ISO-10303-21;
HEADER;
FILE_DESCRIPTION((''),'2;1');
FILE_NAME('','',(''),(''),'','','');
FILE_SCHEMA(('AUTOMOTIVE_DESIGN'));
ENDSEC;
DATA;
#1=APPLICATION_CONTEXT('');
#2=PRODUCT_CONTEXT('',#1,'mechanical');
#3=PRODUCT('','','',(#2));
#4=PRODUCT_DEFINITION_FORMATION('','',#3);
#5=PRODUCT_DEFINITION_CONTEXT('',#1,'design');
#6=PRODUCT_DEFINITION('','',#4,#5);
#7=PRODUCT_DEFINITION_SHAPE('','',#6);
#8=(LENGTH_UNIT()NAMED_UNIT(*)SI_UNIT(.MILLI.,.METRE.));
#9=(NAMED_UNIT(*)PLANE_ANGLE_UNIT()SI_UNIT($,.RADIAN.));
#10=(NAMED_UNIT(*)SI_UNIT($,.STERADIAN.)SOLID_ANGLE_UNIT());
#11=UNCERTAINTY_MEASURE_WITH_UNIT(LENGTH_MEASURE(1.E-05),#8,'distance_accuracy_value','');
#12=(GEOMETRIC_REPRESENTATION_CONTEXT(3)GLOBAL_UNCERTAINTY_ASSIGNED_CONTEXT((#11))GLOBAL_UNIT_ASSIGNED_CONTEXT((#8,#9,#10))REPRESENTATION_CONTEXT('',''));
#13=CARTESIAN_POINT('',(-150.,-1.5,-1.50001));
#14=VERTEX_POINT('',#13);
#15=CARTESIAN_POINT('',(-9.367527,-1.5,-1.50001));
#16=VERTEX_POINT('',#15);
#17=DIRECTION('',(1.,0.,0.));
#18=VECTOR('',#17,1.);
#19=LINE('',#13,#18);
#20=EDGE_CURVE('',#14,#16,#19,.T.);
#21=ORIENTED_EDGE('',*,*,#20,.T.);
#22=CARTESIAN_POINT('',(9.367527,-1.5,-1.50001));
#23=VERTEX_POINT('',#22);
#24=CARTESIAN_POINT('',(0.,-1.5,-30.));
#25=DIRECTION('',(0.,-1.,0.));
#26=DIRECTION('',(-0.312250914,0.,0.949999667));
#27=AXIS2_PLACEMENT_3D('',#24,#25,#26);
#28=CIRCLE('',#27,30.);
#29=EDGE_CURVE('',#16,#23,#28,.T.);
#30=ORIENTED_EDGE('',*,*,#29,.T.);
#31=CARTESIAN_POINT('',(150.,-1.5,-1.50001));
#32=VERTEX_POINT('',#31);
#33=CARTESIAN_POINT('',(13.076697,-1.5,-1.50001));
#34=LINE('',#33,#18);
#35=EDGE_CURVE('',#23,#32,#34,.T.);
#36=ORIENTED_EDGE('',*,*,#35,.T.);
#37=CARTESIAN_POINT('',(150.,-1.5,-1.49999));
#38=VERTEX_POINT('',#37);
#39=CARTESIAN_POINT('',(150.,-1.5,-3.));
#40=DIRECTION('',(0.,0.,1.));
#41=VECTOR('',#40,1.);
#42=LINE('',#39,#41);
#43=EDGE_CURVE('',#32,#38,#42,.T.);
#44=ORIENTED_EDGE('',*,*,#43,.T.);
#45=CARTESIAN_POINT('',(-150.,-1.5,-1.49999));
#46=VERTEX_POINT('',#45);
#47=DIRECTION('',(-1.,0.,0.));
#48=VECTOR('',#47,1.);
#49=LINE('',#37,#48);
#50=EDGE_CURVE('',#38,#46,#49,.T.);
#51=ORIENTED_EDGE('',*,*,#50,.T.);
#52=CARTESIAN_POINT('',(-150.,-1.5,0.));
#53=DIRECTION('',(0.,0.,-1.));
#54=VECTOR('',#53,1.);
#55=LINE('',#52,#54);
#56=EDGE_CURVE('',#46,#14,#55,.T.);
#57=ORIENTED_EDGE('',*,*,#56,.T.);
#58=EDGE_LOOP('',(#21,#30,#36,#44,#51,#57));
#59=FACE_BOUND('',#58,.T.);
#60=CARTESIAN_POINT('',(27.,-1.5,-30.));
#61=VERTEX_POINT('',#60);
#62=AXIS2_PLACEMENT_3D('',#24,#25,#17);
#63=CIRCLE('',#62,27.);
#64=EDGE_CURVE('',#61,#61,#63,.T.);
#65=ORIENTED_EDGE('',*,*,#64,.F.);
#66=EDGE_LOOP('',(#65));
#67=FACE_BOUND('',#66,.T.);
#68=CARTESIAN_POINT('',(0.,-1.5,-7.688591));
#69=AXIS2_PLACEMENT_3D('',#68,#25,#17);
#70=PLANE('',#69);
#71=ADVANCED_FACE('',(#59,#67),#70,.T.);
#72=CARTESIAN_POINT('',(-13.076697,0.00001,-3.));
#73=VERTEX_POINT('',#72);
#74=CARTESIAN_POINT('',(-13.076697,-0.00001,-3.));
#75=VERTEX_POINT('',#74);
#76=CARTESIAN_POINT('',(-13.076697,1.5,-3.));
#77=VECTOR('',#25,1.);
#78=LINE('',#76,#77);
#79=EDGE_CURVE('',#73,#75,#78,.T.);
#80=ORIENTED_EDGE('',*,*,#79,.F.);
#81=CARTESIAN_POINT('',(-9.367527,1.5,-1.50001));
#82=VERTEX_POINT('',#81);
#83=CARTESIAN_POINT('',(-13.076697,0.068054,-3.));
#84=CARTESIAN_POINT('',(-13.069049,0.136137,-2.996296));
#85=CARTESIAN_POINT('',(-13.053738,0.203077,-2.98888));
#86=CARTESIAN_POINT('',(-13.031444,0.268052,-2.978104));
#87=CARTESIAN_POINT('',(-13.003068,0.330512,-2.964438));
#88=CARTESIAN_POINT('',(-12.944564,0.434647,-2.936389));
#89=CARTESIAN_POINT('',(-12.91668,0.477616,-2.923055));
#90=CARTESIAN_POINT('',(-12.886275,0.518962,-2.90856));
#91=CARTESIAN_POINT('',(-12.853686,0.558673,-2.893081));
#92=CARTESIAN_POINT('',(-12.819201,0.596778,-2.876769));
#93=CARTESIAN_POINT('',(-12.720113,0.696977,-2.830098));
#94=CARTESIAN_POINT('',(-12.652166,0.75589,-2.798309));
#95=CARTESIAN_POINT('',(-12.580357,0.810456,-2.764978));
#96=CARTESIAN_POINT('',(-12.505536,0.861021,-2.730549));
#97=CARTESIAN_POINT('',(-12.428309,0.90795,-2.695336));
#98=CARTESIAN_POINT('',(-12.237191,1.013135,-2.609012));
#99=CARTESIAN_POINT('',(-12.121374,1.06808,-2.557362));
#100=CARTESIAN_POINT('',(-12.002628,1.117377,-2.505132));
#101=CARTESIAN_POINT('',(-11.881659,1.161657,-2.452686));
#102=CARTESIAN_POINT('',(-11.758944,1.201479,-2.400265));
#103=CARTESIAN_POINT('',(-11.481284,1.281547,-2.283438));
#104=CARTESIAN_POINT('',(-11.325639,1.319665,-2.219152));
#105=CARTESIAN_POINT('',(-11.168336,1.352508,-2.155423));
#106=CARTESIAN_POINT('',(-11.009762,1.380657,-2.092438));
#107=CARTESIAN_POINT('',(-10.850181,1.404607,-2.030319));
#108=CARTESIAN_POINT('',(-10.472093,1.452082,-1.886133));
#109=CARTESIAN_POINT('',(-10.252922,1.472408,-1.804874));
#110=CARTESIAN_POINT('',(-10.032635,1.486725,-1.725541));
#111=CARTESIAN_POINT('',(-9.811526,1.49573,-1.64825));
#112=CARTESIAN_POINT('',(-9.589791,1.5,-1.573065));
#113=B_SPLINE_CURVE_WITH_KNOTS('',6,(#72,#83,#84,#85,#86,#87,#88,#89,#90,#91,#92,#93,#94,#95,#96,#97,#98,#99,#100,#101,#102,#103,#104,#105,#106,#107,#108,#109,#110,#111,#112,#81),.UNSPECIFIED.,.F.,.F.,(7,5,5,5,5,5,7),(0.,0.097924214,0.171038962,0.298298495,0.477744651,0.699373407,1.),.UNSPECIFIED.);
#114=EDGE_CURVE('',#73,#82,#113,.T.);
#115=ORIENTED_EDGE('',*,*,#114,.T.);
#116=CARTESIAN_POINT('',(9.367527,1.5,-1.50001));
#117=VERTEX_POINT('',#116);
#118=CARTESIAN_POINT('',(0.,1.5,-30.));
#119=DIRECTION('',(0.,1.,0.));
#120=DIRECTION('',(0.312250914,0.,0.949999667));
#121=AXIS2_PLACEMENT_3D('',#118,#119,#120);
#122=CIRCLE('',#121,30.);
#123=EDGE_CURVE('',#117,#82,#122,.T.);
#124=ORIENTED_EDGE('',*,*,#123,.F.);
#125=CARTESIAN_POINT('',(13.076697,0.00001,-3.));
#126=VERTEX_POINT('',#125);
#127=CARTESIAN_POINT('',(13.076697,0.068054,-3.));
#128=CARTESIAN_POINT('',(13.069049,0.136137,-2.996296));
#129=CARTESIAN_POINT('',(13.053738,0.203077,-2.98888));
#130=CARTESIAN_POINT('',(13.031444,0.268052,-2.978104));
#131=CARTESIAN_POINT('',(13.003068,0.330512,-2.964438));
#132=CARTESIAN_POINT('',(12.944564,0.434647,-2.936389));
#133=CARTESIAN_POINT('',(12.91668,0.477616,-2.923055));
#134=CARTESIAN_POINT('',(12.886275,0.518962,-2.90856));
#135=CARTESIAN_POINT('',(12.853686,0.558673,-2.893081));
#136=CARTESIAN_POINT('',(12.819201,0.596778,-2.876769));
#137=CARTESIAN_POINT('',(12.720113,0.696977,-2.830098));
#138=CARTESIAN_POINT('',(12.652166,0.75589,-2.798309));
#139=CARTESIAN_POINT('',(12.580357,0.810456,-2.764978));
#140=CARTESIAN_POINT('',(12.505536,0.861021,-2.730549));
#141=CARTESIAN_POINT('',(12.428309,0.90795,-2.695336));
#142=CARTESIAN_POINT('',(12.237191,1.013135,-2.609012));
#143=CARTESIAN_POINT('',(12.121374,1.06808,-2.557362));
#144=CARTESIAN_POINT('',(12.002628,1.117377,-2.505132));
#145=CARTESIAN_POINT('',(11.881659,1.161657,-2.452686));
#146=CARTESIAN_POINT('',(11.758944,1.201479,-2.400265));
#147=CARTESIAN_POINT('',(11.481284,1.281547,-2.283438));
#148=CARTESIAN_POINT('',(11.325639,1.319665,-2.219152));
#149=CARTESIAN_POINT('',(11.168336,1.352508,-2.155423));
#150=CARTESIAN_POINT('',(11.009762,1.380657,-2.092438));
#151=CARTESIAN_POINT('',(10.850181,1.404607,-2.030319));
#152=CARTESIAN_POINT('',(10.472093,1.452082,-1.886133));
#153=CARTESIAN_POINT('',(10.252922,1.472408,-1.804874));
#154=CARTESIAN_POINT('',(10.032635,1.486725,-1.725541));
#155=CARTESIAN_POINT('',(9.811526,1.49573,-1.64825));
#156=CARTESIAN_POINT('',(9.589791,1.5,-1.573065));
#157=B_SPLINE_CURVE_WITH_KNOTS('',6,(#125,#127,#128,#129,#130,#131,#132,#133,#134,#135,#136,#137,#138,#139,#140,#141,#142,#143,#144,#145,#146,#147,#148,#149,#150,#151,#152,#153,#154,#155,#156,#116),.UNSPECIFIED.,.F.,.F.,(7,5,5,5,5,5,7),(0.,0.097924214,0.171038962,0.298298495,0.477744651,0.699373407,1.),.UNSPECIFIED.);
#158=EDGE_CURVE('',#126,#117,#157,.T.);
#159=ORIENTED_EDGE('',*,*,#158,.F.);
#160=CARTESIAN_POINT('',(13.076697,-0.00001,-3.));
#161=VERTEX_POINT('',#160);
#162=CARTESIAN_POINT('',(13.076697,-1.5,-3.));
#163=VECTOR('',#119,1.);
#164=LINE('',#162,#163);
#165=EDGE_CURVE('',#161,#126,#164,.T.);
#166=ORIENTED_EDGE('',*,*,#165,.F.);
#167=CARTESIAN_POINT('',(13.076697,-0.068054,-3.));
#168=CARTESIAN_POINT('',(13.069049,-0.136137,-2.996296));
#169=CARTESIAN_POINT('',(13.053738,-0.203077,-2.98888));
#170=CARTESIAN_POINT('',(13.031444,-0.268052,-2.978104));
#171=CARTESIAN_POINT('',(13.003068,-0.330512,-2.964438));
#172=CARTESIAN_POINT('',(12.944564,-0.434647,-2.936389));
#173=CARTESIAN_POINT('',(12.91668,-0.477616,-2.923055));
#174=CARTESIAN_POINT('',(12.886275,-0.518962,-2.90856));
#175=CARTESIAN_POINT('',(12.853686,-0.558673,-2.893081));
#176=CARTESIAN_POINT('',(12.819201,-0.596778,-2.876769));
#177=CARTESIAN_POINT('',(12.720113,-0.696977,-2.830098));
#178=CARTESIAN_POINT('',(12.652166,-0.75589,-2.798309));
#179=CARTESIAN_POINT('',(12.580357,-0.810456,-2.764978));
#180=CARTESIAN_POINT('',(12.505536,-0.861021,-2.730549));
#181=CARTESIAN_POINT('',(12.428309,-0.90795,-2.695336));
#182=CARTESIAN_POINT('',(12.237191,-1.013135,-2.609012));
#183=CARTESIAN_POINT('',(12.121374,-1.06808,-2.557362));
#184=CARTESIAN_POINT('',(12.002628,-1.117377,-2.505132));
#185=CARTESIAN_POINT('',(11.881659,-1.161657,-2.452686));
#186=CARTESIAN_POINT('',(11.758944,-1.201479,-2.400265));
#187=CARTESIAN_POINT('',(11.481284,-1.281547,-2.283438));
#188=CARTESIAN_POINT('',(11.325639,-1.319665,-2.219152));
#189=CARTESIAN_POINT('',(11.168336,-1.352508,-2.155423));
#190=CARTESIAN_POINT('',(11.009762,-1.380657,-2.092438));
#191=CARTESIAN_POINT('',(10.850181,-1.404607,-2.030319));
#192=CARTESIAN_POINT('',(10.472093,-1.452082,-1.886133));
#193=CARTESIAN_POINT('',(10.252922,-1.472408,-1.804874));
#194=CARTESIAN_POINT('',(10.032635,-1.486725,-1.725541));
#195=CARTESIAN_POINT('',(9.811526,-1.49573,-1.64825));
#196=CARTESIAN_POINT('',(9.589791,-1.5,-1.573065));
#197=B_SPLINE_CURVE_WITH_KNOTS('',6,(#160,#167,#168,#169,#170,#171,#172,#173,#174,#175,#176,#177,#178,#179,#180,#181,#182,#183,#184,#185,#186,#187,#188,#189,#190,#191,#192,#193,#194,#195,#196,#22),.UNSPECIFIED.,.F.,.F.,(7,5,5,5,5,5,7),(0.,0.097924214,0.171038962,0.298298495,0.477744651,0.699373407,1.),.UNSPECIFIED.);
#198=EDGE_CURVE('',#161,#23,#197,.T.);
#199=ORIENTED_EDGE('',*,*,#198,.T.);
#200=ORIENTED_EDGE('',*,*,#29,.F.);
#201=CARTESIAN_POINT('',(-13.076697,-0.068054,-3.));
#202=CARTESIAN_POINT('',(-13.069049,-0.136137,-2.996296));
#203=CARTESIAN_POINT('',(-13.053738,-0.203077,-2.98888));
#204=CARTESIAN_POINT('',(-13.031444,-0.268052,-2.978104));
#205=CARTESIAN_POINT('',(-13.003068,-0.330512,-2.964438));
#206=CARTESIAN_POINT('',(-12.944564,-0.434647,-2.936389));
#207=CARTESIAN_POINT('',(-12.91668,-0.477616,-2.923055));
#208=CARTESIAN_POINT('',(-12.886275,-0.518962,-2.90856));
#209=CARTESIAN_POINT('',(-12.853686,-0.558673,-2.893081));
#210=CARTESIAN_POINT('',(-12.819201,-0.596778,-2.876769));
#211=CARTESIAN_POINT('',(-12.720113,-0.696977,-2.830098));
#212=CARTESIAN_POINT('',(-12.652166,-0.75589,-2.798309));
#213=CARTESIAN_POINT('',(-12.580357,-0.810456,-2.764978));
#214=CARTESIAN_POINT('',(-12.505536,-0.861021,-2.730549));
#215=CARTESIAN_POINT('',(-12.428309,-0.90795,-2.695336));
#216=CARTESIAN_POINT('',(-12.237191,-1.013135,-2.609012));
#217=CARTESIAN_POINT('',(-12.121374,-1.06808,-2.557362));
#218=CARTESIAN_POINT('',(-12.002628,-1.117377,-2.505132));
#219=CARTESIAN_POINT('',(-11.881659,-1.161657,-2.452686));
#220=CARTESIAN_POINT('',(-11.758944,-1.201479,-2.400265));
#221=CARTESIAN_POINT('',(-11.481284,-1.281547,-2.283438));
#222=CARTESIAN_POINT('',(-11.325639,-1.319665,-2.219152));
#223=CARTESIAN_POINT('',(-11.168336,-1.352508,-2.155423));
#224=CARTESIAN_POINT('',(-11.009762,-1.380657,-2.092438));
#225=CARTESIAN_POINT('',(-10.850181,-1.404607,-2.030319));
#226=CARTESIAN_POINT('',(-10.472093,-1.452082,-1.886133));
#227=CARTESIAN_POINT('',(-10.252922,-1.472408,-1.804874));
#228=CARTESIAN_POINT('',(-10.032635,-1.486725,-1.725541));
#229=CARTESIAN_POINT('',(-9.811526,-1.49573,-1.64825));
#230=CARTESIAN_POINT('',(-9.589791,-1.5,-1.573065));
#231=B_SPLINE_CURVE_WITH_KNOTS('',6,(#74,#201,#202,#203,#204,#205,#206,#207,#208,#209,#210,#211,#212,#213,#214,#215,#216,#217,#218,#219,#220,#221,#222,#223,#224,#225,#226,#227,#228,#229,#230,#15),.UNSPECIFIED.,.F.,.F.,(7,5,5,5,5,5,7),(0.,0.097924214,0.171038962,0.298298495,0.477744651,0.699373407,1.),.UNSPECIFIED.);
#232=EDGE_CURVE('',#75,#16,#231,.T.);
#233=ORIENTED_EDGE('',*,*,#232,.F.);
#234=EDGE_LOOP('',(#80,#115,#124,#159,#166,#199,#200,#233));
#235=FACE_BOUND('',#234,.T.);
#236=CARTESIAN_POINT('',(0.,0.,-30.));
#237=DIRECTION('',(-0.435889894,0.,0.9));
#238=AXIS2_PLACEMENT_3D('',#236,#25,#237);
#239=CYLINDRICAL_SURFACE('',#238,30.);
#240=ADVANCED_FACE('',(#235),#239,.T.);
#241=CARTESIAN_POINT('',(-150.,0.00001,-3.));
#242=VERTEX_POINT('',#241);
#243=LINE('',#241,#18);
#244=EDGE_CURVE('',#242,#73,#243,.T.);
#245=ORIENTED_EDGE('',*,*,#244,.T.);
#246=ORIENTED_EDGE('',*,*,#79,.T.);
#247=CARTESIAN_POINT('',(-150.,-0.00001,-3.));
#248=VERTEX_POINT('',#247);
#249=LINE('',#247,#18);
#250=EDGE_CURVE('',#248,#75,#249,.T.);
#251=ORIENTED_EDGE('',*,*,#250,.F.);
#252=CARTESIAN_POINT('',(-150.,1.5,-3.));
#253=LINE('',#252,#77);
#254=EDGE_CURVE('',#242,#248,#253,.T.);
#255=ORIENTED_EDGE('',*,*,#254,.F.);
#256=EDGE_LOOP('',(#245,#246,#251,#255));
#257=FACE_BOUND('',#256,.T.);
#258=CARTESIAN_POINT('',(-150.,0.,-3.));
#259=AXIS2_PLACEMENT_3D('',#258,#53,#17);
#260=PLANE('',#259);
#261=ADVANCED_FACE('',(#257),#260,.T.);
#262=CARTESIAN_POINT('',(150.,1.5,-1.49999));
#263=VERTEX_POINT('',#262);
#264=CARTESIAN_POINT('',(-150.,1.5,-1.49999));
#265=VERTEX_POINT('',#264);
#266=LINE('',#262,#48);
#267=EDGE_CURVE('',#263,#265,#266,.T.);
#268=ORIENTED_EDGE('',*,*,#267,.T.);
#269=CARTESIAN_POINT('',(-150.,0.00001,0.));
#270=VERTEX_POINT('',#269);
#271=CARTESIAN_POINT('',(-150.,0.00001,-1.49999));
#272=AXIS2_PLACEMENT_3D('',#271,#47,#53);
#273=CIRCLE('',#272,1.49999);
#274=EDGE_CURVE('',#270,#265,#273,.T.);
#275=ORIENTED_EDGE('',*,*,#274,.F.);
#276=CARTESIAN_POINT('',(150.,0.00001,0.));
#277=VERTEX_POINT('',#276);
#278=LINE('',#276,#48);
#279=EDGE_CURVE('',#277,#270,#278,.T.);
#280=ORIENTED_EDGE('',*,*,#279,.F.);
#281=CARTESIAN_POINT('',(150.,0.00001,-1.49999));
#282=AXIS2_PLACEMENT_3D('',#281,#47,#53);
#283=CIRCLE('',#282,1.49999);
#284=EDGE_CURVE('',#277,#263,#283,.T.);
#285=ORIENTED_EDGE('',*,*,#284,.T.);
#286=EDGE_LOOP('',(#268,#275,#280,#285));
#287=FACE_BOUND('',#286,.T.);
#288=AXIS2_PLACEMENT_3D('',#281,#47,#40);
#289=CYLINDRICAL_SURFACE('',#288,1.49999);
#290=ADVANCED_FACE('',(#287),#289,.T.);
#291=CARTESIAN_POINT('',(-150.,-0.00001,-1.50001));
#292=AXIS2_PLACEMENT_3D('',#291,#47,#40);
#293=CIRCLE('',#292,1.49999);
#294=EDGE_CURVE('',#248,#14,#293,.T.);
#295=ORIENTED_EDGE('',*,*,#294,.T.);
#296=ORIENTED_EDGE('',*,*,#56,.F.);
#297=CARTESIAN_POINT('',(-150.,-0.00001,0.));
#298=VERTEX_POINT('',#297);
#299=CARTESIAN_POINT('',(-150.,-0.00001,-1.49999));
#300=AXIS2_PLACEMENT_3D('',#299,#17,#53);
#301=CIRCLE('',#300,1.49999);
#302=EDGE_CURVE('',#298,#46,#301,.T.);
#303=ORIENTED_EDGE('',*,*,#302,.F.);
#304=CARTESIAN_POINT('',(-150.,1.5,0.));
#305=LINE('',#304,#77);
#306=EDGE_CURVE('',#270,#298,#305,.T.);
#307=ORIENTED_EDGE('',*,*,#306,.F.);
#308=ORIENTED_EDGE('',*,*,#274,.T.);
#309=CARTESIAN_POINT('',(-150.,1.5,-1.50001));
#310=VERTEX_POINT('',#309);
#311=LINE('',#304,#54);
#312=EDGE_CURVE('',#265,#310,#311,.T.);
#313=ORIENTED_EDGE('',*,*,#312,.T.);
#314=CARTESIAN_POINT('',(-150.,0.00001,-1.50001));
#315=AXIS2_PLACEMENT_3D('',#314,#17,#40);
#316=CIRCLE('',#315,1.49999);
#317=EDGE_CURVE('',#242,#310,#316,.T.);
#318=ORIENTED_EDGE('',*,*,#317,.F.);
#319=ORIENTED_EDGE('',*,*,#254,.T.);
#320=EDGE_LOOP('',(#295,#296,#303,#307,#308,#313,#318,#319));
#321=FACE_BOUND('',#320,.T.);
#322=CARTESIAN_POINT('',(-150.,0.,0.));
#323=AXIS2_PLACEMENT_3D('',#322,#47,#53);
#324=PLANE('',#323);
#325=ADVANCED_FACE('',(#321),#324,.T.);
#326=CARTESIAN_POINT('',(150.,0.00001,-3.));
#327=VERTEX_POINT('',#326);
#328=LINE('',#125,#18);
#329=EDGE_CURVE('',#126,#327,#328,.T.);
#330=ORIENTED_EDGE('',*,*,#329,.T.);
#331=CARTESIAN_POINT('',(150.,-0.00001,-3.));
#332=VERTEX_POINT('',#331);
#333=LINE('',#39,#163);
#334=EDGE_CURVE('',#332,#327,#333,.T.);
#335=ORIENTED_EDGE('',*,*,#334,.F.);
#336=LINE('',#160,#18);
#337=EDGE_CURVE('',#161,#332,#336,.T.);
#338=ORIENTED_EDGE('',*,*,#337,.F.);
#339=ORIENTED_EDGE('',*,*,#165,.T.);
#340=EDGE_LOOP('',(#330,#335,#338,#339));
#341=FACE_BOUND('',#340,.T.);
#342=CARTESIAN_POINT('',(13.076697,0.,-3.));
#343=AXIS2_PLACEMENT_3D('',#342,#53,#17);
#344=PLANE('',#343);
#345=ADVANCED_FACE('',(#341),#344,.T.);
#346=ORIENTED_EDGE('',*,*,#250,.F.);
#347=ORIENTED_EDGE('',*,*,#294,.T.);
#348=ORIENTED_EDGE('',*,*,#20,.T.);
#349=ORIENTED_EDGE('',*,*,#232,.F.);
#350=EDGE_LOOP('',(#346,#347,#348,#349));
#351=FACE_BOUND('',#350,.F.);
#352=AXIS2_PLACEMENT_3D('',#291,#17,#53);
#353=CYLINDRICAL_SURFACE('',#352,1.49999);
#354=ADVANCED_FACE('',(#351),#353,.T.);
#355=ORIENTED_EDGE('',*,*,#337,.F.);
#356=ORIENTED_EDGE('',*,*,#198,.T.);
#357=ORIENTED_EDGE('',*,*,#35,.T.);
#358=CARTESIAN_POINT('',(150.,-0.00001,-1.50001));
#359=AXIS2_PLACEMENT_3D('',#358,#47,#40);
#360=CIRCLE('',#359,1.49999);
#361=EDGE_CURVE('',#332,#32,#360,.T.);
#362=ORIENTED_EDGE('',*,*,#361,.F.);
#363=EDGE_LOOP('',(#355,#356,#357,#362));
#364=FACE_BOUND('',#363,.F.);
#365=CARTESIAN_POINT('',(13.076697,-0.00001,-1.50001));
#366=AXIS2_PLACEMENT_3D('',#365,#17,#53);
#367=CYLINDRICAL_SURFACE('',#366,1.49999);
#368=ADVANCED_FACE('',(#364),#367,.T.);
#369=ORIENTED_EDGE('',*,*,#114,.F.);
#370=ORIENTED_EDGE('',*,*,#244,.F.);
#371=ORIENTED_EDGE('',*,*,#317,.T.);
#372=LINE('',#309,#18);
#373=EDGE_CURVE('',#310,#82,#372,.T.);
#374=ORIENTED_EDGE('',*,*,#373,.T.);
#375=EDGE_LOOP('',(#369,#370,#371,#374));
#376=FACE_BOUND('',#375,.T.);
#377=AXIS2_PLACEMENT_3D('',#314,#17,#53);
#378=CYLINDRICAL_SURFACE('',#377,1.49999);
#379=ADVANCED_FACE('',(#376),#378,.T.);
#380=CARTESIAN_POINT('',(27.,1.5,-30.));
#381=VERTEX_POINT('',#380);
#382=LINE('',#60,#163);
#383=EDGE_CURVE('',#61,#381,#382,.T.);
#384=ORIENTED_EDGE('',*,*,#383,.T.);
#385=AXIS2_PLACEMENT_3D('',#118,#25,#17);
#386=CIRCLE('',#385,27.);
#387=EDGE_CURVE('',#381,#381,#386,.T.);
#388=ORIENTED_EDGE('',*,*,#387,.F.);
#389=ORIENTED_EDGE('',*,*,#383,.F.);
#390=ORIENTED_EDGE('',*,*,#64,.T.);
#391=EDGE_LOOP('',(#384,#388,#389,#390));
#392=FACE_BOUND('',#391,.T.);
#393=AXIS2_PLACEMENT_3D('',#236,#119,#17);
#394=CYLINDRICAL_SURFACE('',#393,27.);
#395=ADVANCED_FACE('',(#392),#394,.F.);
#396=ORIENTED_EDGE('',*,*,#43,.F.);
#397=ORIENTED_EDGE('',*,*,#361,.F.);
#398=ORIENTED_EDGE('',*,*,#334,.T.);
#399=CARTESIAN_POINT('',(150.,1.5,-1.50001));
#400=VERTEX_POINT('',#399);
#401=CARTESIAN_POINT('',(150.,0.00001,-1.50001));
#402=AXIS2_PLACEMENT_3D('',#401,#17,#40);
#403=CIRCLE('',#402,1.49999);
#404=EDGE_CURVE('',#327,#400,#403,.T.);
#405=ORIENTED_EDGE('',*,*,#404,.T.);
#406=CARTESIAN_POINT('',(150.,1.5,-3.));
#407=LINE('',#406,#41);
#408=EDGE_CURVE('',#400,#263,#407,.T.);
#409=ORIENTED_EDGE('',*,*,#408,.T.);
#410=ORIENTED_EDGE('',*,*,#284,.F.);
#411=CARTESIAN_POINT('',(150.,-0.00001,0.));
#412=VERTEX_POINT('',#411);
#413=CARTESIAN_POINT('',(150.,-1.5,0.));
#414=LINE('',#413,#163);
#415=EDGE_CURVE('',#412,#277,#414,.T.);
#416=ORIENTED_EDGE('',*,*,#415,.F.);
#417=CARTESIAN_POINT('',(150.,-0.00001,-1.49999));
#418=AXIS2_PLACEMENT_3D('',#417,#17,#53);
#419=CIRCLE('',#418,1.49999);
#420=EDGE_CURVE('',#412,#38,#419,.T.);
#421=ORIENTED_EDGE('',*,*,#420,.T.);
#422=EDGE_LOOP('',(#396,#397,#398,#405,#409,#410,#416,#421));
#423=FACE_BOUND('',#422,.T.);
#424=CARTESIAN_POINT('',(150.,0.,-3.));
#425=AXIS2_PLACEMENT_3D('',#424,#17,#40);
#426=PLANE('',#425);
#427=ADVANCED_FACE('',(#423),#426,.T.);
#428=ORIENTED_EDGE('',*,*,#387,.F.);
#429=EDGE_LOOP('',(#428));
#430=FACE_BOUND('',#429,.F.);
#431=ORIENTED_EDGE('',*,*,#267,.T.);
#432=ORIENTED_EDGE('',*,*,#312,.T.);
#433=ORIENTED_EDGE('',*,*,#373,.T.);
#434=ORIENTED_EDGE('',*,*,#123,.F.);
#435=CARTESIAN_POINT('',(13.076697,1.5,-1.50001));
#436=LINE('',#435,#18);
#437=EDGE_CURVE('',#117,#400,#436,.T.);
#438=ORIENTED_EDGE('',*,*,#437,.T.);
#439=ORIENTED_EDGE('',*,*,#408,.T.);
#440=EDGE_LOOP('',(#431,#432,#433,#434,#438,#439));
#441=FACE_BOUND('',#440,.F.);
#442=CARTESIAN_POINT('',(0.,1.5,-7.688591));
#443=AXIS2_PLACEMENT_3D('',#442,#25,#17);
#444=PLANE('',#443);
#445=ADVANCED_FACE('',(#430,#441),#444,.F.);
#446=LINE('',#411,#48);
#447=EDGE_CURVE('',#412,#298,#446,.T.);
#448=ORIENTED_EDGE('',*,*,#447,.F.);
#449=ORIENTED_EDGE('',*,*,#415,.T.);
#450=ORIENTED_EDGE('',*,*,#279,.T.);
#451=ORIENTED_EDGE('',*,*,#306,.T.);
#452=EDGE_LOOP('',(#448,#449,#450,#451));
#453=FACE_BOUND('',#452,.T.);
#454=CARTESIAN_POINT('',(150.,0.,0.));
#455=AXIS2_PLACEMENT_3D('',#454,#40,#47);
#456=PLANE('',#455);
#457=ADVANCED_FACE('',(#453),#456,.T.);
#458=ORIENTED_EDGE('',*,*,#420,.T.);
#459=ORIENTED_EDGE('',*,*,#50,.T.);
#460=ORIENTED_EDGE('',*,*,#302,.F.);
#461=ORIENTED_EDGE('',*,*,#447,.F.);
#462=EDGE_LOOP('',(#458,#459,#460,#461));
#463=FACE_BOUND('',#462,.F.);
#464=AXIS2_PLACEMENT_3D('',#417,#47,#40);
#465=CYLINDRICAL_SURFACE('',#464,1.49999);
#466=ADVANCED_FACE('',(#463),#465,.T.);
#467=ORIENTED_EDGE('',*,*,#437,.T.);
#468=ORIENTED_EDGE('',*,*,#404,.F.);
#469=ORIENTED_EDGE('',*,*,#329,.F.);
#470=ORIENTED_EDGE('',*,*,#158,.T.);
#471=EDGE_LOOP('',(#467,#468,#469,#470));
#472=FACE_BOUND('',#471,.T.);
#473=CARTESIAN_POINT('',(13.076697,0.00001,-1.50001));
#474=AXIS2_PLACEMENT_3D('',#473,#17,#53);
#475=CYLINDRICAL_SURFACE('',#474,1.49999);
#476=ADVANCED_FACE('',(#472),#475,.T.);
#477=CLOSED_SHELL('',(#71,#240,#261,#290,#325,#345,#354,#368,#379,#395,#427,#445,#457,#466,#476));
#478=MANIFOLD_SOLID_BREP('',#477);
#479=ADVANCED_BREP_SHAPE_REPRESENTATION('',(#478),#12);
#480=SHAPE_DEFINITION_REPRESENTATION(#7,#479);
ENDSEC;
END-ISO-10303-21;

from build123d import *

# Parameters (mm, degrees)
F0_R     = 27
F1_DEPTH = 1.5
F2_R     = 1.49999


# Not quite as in the source:
# - a fillet or chamfer is up to 0.001 mm smaller than in the source, because OpenCascade refuses the exact size


with BuildPart() as f1:
    # F0 (on Front) → F1 (new body, symmetric)
    with BuildSketch(Plane.XZ):
        with BuildLine():
            Line((150, 0), (-150, 0))
            Line((-150, 0), (-150, -3))
            Line((-150, -3), (-13.0766968306, -3))
            ThreePointArc((-13.0766968306, -3), (0, -60), (13.0766968306, -3))
            Line((13.0766968306, -3), (150, -3))
            Line((150, -3), (150, 0))
        make_face()
        with Locations((0, -30)):
            Circle(F0_R, mode=Mode.SUBTRACT)
    extrude(amount=F1_DEPTH, both=True)

    # F2 (radius 1.5 in the source; OpenCascade refuses exactly that, so slightly less here)
    f2_edges = [f1.edges().sort_by_distance(p)[0] for p in [
        (-81.538348, -1.5, -3),
        (0, -1.5, 0),
        (0, 1.5, 0),
        (-81.538348, 1.5, -3),
        (81.538348, -1.5, -3),
        (81.538348, 1.5, -3),
    ]]
    fillet(f2_edges, radius=F2_R)


solid = f1.part
